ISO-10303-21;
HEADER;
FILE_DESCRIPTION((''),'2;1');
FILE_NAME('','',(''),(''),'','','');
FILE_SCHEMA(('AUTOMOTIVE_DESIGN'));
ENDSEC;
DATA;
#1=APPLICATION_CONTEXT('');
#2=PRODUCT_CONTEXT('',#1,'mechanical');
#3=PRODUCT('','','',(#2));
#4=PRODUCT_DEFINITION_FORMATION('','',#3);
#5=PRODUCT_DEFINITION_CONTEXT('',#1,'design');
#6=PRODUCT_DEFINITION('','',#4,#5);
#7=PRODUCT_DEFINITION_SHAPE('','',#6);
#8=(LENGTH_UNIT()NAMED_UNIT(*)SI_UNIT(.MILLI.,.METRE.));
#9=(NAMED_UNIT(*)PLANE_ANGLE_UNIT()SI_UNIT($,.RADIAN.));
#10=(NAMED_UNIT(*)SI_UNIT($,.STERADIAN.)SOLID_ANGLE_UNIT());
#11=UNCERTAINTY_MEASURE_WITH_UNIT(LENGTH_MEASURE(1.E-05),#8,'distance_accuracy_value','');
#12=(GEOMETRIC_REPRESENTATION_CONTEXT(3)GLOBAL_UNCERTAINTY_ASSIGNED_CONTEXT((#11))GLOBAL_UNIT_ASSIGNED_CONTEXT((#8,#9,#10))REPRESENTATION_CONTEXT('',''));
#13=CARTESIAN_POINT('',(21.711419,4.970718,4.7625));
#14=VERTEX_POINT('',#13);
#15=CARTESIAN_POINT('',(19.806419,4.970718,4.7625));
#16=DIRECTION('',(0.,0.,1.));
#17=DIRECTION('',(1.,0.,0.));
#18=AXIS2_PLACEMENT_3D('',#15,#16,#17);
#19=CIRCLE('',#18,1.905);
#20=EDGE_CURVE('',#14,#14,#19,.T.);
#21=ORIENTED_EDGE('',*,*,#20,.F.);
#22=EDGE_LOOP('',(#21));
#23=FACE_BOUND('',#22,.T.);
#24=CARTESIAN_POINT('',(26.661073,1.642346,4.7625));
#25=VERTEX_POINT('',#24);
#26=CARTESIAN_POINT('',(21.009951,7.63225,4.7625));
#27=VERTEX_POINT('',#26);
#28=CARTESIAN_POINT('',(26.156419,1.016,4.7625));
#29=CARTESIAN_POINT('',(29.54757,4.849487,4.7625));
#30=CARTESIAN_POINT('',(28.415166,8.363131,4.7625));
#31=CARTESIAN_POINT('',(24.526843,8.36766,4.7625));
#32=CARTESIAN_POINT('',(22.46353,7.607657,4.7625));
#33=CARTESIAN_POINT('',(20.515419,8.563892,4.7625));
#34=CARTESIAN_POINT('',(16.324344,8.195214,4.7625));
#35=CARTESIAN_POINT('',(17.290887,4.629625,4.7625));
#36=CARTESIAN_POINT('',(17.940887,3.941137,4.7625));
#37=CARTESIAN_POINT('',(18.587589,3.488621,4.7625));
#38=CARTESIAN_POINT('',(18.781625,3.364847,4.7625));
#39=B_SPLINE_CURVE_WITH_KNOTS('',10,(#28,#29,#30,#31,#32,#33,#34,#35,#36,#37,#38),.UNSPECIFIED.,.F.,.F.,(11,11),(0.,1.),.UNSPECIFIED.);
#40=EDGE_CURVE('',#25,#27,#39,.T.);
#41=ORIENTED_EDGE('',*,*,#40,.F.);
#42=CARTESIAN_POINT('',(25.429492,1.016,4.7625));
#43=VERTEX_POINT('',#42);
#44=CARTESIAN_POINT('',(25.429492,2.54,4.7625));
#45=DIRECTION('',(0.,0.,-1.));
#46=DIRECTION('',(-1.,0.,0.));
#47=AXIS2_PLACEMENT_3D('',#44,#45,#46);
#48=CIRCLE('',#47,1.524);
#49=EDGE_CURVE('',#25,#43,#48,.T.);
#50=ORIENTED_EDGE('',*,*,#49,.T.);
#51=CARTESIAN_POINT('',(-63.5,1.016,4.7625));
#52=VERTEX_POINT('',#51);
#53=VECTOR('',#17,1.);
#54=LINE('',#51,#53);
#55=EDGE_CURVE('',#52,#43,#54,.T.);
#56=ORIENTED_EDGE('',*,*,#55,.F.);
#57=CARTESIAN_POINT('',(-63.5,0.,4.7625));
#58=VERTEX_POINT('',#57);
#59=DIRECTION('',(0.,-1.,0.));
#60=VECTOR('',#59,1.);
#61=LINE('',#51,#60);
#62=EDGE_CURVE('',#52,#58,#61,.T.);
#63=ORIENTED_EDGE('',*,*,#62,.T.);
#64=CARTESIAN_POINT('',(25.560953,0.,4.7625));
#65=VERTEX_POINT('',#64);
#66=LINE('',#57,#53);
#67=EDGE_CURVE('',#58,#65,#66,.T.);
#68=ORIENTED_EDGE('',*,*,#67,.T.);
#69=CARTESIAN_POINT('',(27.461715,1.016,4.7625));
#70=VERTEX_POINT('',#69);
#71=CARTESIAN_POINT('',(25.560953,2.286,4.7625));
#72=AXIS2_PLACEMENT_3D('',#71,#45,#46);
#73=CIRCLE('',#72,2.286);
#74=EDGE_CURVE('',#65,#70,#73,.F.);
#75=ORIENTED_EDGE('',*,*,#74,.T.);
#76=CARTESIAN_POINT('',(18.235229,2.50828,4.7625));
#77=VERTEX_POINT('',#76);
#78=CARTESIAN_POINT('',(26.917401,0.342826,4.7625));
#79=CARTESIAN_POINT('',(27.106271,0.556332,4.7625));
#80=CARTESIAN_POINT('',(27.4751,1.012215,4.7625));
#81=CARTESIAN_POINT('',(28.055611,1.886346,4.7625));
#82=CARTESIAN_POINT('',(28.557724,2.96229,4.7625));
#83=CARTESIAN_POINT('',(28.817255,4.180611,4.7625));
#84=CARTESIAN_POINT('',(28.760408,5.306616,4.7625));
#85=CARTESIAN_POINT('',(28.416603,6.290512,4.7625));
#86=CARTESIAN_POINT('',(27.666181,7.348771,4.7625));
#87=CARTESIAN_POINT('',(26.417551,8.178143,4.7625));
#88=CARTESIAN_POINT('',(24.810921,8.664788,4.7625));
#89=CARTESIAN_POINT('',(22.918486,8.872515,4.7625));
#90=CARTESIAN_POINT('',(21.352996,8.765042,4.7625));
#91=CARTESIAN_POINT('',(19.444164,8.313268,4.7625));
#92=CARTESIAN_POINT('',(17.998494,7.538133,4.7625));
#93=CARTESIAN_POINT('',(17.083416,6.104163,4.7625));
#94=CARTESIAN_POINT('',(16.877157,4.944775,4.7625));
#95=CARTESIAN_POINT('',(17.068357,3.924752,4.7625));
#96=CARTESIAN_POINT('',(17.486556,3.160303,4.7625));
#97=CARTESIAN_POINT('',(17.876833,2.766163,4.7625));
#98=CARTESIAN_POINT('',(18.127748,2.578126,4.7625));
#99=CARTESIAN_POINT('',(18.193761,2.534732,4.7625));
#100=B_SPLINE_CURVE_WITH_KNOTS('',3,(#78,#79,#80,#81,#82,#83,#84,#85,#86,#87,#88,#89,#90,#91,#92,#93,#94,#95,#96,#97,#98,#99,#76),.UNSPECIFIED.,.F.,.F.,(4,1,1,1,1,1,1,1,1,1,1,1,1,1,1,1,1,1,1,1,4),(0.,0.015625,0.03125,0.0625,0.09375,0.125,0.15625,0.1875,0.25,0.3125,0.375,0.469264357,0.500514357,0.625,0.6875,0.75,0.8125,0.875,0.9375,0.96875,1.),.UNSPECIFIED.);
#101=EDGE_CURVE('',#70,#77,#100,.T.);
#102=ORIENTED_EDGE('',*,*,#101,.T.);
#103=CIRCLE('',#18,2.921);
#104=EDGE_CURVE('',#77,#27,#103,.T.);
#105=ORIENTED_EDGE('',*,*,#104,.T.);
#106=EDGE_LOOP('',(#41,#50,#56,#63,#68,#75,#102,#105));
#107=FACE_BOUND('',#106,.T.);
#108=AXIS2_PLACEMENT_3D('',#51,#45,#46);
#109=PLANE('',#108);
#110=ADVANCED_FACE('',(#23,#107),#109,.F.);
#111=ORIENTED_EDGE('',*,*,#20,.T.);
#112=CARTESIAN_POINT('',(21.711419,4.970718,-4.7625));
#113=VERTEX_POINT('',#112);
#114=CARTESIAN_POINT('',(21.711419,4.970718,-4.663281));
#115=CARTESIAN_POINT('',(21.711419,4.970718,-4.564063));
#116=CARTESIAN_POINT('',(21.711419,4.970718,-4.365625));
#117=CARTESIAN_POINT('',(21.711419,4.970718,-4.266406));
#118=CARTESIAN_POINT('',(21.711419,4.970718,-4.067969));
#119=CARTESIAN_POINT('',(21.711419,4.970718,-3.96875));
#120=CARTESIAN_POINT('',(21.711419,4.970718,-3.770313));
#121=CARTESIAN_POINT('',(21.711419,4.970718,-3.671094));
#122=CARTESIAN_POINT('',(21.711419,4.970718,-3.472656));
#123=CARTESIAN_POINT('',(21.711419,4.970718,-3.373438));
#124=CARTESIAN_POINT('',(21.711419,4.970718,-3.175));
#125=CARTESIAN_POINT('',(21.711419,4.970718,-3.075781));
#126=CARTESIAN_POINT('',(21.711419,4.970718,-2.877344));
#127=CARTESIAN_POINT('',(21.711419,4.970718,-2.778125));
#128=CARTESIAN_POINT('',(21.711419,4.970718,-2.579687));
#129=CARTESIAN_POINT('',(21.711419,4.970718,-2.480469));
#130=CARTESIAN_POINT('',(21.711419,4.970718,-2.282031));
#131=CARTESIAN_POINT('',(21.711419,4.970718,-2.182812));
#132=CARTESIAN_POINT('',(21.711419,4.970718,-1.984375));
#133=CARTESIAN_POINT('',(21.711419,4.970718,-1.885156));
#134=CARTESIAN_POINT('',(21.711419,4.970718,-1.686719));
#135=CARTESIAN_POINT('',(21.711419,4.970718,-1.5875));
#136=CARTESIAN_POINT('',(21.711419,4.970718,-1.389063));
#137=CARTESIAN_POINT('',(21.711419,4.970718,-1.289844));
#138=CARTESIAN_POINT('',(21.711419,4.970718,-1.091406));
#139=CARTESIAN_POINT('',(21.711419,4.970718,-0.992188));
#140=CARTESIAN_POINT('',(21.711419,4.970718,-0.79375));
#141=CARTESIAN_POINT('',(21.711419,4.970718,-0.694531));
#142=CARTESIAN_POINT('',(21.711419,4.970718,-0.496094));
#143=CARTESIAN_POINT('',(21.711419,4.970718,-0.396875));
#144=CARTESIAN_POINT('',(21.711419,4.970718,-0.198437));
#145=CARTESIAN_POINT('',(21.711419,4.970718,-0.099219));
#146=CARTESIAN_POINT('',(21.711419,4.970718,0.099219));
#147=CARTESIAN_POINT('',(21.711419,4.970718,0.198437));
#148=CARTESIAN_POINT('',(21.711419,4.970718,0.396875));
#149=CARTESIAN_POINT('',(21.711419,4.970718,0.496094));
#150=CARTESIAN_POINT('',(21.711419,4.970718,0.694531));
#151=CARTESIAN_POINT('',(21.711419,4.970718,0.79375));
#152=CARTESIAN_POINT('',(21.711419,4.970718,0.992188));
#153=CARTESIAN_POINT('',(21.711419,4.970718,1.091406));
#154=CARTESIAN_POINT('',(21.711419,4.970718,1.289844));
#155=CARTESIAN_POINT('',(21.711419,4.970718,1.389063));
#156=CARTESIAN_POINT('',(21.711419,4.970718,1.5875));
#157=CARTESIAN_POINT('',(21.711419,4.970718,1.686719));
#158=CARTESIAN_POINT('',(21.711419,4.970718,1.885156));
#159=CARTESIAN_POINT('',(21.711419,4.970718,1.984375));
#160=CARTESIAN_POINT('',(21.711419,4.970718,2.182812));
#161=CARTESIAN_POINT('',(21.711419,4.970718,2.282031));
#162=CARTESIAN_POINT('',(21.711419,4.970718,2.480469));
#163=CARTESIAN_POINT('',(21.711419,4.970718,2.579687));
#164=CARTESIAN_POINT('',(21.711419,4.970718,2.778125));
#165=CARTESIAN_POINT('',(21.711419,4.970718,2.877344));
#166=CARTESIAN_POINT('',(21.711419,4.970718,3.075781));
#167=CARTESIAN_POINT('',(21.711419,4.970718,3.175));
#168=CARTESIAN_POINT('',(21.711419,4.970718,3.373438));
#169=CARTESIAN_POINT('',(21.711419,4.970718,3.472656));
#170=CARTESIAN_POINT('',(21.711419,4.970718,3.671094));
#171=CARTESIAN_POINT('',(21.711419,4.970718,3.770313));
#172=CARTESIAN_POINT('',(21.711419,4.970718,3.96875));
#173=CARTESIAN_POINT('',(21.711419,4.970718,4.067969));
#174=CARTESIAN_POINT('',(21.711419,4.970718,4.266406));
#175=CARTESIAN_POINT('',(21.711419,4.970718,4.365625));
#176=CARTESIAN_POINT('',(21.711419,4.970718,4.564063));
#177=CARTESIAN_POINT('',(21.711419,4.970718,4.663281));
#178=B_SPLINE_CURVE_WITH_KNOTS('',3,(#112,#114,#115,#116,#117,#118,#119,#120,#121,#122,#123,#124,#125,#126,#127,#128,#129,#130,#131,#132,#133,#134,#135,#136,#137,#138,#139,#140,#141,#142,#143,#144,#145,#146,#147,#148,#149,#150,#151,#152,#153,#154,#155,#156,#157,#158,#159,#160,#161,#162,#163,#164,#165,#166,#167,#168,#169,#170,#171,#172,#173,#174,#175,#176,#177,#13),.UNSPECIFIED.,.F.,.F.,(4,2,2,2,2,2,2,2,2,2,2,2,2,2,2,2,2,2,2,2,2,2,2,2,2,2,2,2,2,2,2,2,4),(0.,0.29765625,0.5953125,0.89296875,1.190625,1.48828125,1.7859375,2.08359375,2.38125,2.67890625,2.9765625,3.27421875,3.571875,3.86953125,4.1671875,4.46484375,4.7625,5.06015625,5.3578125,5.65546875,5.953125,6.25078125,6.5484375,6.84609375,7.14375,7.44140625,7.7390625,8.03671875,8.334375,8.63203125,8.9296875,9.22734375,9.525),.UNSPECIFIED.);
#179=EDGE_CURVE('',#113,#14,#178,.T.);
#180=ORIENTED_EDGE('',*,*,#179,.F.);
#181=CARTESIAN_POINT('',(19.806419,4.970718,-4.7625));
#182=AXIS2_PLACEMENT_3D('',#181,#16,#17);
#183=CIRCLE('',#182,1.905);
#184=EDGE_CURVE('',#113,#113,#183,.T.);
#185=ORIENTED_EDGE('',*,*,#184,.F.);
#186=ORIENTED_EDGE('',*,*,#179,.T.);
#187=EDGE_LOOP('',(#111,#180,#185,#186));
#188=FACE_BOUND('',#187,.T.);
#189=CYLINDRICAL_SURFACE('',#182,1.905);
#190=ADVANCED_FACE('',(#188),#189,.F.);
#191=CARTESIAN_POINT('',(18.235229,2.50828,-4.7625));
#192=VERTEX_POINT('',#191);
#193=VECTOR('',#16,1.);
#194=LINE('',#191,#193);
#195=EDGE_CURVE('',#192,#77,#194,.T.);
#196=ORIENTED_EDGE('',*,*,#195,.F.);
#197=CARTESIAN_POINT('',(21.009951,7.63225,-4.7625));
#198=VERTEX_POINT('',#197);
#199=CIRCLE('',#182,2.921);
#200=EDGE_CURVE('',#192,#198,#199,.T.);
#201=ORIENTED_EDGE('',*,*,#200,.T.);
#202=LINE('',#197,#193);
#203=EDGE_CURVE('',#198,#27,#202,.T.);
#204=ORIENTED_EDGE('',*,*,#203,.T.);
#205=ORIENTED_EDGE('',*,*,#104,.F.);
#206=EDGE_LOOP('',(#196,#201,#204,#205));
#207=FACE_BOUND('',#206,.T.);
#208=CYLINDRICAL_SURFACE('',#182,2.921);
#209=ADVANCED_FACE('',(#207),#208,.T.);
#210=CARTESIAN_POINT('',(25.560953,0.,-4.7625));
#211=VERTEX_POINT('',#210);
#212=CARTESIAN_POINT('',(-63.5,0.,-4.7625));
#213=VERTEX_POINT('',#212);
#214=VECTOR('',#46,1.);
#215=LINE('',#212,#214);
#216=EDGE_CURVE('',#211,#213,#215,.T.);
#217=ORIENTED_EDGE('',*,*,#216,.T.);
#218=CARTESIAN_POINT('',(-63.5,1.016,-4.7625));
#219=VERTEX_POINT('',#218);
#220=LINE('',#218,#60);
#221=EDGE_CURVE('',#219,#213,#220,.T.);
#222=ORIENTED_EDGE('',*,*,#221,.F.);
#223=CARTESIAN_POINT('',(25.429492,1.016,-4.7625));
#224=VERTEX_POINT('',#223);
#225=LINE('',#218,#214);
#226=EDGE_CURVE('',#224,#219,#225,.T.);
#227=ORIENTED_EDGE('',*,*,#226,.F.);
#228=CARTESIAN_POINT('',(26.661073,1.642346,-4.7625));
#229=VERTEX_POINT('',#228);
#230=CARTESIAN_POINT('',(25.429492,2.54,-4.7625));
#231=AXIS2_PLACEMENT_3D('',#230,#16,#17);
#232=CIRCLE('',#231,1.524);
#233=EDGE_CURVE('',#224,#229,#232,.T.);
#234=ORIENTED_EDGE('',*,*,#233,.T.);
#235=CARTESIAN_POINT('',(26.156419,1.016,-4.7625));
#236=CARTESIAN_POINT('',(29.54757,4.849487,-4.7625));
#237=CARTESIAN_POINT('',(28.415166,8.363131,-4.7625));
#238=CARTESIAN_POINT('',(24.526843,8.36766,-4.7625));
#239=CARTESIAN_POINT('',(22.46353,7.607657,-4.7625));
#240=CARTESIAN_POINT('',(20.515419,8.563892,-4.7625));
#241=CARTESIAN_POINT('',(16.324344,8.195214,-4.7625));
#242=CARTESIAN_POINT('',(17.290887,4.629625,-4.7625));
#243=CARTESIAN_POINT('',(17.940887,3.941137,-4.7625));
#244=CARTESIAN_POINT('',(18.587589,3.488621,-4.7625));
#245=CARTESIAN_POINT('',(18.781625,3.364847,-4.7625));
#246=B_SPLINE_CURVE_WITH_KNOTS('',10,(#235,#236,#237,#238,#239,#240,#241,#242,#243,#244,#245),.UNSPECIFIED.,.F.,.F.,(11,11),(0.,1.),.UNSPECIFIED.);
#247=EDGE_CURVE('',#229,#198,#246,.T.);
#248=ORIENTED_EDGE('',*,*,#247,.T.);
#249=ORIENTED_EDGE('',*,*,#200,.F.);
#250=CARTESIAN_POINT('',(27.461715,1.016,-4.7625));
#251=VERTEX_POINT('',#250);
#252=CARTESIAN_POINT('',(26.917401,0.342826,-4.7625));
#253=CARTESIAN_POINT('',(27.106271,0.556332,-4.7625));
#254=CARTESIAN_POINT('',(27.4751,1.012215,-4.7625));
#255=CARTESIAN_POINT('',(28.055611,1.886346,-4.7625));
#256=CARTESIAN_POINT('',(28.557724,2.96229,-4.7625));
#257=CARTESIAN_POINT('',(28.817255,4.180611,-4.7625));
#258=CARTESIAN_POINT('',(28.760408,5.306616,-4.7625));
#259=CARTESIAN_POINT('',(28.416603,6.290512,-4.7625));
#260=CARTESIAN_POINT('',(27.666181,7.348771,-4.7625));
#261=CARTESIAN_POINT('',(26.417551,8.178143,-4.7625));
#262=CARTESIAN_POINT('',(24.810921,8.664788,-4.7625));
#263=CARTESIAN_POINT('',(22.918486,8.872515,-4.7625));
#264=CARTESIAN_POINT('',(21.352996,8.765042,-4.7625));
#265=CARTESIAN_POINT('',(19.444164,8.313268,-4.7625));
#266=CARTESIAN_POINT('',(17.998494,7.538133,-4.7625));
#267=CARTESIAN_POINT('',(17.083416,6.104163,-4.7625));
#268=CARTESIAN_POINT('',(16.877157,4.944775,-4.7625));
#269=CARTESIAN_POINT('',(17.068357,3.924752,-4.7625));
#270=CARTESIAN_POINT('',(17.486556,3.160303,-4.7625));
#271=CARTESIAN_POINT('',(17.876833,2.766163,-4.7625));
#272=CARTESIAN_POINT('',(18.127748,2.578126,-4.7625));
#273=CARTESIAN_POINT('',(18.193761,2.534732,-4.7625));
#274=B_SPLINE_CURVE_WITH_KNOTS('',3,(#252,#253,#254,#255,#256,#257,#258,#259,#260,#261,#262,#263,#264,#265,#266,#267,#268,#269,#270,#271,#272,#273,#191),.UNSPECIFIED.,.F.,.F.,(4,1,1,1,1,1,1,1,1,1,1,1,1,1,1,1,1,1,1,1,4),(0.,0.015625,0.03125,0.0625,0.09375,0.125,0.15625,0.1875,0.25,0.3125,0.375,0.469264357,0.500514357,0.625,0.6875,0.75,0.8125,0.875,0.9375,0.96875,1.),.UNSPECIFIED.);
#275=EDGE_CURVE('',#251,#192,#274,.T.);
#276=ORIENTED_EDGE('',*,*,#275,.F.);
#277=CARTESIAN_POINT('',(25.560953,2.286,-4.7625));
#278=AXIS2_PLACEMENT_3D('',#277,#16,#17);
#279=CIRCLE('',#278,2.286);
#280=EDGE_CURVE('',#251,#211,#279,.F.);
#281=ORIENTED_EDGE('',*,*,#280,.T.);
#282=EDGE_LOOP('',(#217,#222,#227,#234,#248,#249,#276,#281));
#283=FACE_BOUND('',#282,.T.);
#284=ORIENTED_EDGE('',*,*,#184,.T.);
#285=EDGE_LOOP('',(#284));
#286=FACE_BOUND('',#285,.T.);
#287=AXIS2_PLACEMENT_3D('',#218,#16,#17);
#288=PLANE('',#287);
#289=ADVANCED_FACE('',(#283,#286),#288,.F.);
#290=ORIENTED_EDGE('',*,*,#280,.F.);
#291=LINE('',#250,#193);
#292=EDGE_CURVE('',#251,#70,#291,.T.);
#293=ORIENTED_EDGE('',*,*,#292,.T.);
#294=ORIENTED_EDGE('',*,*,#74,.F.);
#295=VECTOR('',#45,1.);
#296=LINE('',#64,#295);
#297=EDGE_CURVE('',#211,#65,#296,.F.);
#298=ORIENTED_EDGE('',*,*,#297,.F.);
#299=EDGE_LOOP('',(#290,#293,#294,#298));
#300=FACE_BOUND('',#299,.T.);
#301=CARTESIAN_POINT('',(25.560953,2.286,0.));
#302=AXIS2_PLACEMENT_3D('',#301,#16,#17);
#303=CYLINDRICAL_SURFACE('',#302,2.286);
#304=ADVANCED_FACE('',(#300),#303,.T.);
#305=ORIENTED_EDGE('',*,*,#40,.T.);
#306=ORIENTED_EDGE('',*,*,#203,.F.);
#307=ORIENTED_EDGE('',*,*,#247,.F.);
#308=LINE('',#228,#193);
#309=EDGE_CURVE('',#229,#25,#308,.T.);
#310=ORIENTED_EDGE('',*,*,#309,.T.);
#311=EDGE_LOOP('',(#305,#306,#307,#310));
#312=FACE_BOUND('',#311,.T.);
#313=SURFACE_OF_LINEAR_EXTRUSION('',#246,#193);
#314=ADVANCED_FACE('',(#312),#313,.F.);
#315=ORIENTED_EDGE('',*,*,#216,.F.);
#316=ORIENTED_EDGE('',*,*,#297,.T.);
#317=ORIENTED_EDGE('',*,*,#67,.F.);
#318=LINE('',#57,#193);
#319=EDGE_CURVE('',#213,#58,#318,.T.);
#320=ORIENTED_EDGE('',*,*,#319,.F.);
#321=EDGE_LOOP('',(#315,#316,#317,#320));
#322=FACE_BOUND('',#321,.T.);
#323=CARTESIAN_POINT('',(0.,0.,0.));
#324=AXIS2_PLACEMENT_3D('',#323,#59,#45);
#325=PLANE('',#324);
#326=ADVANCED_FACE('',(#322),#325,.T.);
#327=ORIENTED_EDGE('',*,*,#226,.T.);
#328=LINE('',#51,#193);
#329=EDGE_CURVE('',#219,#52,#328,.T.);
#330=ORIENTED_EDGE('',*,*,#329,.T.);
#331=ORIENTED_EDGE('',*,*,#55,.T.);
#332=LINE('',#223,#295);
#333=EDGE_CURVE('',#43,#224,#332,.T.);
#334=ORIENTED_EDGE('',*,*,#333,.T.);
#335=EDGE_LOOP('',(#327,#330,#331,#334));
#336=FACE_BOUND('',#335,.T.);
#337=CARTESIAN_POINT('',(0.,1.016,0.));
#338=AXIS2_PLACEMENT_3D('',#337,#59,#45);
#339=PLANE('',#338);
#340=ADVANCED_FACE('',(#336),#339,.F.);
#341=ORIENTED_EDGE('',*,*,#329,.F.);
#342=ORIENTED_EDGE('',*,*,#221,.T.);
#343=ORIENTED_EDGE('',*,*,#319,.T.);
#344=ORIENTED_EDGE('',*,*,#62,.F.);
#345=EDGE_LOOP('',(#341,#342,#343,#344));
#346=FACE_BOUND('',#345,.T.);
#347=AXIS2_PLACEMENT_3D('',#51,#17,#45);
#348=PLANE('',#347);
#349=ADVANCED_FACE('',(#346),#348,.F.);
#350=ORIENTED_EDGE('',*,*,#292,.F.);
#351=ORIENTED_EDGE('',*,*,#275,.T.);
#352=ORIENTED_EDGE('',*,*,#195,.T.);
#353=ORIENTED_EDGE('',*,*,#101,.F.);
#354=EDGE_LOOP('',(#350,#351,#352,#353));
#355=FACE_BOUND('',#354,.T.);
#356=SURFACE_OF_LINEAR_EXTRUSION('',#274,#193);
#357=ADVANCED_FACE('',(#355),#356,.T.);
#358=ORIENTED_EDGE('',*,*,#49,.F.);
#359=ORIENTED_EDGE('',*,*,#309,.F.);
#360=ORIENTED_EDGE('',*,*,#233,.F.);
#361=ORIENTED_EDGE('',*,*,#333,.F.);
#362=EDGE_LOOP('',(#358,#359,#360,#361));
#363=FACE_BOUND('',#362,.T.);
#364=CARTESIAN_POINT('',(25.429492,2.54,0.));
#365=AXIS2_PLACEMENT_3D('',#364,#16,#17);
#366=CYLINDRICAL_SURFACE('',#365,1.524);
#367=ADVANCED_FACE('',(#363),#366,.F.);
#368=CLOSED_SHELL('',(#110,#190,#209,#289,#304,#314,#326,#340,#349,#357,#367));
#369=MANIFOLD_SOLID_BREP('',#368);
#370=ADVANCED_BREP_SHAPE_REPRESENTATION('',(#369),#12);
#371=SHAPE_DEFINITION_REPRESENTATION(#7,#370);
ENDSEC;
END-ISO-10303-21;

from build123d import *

# Parameters (mm, degrees)
SKETCH1_W               = 127
SKETCH1_H               = 9.525
BOSS_EXTRUDE1_DEPTH     = 1.016
BOSS_EXTRUDE6_START     = -9.525
BOSS_EXTRUDE6_OUTLINE_R = 1.905
BOSS_EXTRUDE6_DEPTH     = 9.525
SKETCH9_W               = 36.03828532
SKETCH9_H               = 1.016
CUT_EXTRUDE1_DEPTH      = 65.812462184
FILLET1_R               = 1.524
FILLET2_R               = 2.286


# Read off the part's stored shape, not the designer's step: Boss-Extrude6
with BuildPart() as part:
    # Sketch1 → Boss-Extrude1 (new body)
    with BuildSketch(Plane(origin=(0, 0, 0), x_dir=(1, 0, 0), z_dir=(0, 1, 0))):
        Rectangle(SKETCH1_W, SKETCH1_H)
    extrude(amount=BOSS_EXTRUDE1_DEPTH)

    # Boss-Extrude6 outline → Boss-Extrude6 (add)
    with BuildSketch(Plane.XY.offset(4.7625).offset(BOSS_EXTRUDE6_START)):
        with BuildLine():
            add(Edge.make_bspline(
                [(26.156419395, 1.016), (27.757434641, 2.825849187), (28.350180328, 4.564407662), (28.120667146, 5.896063841), (27.39467414, 6.780008349), (26.424210355, 7.324865414), (25.33727298, 7.653728665), (24.19871737, 7.837160052), (23.061378829, 7.895254529), (21.981011381, 7.826483038), (21.009951357, 7.632249789)],
                knots=[0, 0, 0, 0, 0, 0, 0, 0, 0, 0, 0, 0.472115693, 0.472115693, 0.472115693, 0.472115693, 0.472115693, 0.472115693, 0.472115693, 0.472115693, 0.472115693, 0.472115693, 0.472115693], degree=10))
            Line((26.156419395, 1.016), (27.46171468, 1.016))
            add(Edge.make_bspline(
                [(27.46171468, 1.016), (27.623905569, 1.236289395), (28.056884434, 1.889074198), (28.557724419, 2.962290085), (28.8172552, 4.180611411), (28.76040826, 5.30661561), (28.416603121, 6.290511823), (27.666181069, 7.348770574), (26.417551122, 8.178142562), (24.81092103, 8.664788271), (22.918485913, 8.872514854), (21.352995968, 8.76504205), (19.444164003, 8.313268155), (17.998494366, 7.538133432), (17.083415516, 6.10416322), (16.87715717, 4.944774701), (17.068356899, 3.924752178), (17.486556032, 3.160303311), (17.876833308, 2.766163414), (18.127748015, 2.578126084), (18.193760769, 2.534731904), (18.235229403, 2.508279507)],
                knots=[0.015823115, 0.015823115, 0.015823115, 0.015823115, 0.03125, 0.0625, 0.09375, 0.125, 0.15625, 0.1875, 0.25, 0.3125, 0.375, 0.469264357, 0.500514357, 0.625, 0.6875, 0.75, 0.8125, 0.875, 0.9375, 0.96875, 1, 1, 1, 1], degree=3))
            ThreePointArc((18.235229403, 2.508279507), (22.374991172, 3.579790176), (21.009951357, 7.632249789))
        make_face()
        with Locations((19.806419395, 4.970717934)):
            Circle(BOSS_EXTRUDE6_OUTLINE_R, mode=Mode.SUBTRACT)
    extrude(amount=BOSS_EXTRUDE6_DEPTH)

    # Sketch9 → Cut-Extrude1 (cut, through all)
    with BuildSketch(Plane.XY.offset(4.7625)):
        with Locations((45.48085734, 0.508)):
            Rectangle(SKETCH9_W, SKETCH9_H)
    extrude(amount=-CUT_EXTRUDE1_DEPTH, mode=Mode.SUBTRACT)

    # Fillet1
    fillet1_edges = [part.edges().sort_by_distance(p)[0] for p in [
        (26.156419395, 1.016, 0),
    ]]
    fillet(fillet1_edges, radius=FILLET1_R)

    # Fillet2
    # the kernel refuses this fillet: 2.286 mm, written as the material it takes off along each edge
    with BuildSketch(Plane(origin=(27.46171468, 0, 9.51440488), x_dir=(4.5999599579907773e-10, 1.0, 0), z_dir=(0, 0, -1))) as fillet2_piece_1:
        with BuildLine():
            CenterArc((2.285999999, -1.900761953), FILLET2_R, 123.748988569, 56.251011404)
            Line((-1e-09, -1.900761952), (-0.045720001, -1.900761952))
            Line((-0.045720001, -1.900761952), (-0.04572, 0))
            Line((-0.04572, 0), (0, 0.04572))
            ThreePointArc((0, 0.04572), (0.508, 0.04572), (0.9906, 0.038015239))
            Line((0.9906, 0.038015239), (1.016, 0))
        make_face()
    extrude(amount=19.02880976, mode=Mode.SUBTRACT)


solid = part.part
